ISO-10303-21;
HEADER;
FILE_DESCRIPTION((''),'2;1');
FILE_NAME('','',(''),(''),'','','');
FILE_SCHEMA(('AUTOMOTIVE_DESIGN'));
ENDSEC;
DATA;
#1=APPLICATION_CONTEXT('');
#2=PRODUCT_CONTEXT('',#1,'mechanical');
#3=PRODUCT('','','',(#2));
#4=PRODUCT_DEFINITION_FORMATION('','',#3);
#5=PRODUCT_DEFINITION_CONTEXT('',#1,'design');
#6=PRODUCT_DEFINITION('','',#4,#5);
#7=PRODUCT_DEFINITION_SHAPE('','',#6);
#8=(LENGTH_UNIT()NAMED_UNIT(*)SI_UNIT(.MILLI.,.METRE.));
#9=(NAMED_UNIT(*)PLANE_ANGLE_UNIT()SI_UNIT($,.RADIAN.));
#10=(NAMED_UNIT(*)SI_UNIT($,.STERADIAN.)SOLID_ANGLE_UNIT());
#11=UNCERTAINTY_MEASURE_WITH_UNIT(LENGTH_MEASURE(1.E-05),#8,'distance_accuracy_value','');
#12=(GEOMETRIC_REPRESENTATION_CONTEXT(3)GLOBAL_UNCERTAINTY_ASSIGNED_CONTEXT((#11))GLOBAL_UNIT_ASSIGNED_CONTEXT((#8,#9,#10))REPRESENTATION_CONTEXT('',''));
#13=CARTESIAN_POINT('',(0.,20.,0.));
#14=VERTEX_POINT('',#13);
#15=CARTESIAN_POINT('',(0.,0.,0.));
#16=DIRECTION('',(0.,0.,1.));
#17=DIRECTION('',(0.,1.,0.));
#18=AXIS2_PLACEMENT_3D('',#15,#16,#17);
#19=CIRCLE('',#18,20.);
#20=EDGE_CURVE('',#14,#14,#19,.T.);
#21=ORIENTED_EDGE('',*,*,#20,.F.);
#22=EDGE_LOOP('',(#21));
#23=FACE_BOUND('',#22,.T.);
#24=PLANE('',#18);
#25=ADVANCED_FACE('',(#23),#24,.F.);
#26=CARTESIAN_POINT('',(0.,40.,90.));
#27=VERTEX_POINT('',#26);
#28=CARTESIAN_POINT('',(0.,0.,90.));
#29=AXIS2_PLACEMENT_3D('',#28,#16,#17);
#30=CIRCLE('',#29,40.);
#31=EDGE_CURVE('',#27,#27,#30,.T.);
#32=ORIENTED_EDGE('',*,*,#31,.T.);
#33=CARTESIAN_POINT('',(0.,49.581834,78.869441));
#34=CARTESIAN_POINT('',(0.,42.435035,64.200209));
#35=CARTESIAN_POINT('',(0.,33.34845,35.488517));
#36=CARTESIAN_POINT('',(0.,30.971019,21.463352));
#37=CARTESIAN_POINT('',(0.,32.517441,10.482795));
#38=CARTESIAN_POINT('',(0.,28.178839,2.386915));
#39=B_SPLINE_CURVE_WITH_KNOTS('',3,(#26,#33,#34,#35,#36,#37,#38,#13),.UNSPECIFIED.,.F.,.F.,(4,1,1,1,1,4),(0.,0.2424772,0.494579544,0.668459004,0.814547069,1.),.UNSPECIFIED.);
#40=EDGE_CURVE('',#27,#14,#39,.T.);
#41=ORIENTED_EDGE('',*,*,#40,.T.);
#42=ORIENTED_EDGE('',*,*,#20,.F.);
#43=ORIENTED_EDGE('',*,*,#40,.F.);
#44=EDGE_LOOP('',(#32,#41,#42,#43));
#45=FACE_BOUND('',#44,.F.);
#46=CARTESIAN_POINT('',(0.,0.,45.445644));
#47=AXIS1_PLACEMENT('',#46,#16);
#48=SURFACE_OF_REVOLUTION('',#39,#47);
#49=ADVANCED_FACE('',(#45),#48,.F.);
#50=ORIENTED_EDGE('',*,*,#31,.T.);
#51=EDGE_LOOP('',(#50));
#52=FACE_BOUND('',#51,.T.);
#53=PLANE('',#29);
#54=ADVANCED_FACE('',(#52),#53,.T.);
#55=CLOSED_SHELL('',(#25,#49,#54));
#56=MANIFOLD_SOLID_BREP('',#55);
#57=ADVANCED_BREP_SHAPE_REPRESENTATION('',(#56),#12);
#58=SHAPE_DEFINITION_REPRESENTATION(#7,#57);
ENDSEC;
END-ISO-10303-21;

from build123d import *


with BuildPart() as f1:
    # F0 (on Right) → F1 (revolve)
    with BuildSketch(Plane.YZ):
        with BuildLine():
            Line((40, 90), (0, 90))
            Line((0, 90), (0, 0))
            Line((0, 0), (20, 0))
            add(Edge.make_bspline(
                [(40, 90), (49.5818336765, 78.8694407024), (42.4350350409, 64.2002089946), (33.3484499065, 35.488516994), (30.97101949, 21.463351906), (32.5174405975, 10.4827954865), (28.1788393461, 2.3869152735), (20, 0)],
                knots=[0, 0, 0, 0, 0.2424772002, 0.4945795444, 0.6684590037, 0.8145470688, 1, 1, 1, 1], degree=3))
        make_face()
    revolve(axis=Axis((0, 0, 45.4456442967), (0, 0, 1)))


solid = f1.part
